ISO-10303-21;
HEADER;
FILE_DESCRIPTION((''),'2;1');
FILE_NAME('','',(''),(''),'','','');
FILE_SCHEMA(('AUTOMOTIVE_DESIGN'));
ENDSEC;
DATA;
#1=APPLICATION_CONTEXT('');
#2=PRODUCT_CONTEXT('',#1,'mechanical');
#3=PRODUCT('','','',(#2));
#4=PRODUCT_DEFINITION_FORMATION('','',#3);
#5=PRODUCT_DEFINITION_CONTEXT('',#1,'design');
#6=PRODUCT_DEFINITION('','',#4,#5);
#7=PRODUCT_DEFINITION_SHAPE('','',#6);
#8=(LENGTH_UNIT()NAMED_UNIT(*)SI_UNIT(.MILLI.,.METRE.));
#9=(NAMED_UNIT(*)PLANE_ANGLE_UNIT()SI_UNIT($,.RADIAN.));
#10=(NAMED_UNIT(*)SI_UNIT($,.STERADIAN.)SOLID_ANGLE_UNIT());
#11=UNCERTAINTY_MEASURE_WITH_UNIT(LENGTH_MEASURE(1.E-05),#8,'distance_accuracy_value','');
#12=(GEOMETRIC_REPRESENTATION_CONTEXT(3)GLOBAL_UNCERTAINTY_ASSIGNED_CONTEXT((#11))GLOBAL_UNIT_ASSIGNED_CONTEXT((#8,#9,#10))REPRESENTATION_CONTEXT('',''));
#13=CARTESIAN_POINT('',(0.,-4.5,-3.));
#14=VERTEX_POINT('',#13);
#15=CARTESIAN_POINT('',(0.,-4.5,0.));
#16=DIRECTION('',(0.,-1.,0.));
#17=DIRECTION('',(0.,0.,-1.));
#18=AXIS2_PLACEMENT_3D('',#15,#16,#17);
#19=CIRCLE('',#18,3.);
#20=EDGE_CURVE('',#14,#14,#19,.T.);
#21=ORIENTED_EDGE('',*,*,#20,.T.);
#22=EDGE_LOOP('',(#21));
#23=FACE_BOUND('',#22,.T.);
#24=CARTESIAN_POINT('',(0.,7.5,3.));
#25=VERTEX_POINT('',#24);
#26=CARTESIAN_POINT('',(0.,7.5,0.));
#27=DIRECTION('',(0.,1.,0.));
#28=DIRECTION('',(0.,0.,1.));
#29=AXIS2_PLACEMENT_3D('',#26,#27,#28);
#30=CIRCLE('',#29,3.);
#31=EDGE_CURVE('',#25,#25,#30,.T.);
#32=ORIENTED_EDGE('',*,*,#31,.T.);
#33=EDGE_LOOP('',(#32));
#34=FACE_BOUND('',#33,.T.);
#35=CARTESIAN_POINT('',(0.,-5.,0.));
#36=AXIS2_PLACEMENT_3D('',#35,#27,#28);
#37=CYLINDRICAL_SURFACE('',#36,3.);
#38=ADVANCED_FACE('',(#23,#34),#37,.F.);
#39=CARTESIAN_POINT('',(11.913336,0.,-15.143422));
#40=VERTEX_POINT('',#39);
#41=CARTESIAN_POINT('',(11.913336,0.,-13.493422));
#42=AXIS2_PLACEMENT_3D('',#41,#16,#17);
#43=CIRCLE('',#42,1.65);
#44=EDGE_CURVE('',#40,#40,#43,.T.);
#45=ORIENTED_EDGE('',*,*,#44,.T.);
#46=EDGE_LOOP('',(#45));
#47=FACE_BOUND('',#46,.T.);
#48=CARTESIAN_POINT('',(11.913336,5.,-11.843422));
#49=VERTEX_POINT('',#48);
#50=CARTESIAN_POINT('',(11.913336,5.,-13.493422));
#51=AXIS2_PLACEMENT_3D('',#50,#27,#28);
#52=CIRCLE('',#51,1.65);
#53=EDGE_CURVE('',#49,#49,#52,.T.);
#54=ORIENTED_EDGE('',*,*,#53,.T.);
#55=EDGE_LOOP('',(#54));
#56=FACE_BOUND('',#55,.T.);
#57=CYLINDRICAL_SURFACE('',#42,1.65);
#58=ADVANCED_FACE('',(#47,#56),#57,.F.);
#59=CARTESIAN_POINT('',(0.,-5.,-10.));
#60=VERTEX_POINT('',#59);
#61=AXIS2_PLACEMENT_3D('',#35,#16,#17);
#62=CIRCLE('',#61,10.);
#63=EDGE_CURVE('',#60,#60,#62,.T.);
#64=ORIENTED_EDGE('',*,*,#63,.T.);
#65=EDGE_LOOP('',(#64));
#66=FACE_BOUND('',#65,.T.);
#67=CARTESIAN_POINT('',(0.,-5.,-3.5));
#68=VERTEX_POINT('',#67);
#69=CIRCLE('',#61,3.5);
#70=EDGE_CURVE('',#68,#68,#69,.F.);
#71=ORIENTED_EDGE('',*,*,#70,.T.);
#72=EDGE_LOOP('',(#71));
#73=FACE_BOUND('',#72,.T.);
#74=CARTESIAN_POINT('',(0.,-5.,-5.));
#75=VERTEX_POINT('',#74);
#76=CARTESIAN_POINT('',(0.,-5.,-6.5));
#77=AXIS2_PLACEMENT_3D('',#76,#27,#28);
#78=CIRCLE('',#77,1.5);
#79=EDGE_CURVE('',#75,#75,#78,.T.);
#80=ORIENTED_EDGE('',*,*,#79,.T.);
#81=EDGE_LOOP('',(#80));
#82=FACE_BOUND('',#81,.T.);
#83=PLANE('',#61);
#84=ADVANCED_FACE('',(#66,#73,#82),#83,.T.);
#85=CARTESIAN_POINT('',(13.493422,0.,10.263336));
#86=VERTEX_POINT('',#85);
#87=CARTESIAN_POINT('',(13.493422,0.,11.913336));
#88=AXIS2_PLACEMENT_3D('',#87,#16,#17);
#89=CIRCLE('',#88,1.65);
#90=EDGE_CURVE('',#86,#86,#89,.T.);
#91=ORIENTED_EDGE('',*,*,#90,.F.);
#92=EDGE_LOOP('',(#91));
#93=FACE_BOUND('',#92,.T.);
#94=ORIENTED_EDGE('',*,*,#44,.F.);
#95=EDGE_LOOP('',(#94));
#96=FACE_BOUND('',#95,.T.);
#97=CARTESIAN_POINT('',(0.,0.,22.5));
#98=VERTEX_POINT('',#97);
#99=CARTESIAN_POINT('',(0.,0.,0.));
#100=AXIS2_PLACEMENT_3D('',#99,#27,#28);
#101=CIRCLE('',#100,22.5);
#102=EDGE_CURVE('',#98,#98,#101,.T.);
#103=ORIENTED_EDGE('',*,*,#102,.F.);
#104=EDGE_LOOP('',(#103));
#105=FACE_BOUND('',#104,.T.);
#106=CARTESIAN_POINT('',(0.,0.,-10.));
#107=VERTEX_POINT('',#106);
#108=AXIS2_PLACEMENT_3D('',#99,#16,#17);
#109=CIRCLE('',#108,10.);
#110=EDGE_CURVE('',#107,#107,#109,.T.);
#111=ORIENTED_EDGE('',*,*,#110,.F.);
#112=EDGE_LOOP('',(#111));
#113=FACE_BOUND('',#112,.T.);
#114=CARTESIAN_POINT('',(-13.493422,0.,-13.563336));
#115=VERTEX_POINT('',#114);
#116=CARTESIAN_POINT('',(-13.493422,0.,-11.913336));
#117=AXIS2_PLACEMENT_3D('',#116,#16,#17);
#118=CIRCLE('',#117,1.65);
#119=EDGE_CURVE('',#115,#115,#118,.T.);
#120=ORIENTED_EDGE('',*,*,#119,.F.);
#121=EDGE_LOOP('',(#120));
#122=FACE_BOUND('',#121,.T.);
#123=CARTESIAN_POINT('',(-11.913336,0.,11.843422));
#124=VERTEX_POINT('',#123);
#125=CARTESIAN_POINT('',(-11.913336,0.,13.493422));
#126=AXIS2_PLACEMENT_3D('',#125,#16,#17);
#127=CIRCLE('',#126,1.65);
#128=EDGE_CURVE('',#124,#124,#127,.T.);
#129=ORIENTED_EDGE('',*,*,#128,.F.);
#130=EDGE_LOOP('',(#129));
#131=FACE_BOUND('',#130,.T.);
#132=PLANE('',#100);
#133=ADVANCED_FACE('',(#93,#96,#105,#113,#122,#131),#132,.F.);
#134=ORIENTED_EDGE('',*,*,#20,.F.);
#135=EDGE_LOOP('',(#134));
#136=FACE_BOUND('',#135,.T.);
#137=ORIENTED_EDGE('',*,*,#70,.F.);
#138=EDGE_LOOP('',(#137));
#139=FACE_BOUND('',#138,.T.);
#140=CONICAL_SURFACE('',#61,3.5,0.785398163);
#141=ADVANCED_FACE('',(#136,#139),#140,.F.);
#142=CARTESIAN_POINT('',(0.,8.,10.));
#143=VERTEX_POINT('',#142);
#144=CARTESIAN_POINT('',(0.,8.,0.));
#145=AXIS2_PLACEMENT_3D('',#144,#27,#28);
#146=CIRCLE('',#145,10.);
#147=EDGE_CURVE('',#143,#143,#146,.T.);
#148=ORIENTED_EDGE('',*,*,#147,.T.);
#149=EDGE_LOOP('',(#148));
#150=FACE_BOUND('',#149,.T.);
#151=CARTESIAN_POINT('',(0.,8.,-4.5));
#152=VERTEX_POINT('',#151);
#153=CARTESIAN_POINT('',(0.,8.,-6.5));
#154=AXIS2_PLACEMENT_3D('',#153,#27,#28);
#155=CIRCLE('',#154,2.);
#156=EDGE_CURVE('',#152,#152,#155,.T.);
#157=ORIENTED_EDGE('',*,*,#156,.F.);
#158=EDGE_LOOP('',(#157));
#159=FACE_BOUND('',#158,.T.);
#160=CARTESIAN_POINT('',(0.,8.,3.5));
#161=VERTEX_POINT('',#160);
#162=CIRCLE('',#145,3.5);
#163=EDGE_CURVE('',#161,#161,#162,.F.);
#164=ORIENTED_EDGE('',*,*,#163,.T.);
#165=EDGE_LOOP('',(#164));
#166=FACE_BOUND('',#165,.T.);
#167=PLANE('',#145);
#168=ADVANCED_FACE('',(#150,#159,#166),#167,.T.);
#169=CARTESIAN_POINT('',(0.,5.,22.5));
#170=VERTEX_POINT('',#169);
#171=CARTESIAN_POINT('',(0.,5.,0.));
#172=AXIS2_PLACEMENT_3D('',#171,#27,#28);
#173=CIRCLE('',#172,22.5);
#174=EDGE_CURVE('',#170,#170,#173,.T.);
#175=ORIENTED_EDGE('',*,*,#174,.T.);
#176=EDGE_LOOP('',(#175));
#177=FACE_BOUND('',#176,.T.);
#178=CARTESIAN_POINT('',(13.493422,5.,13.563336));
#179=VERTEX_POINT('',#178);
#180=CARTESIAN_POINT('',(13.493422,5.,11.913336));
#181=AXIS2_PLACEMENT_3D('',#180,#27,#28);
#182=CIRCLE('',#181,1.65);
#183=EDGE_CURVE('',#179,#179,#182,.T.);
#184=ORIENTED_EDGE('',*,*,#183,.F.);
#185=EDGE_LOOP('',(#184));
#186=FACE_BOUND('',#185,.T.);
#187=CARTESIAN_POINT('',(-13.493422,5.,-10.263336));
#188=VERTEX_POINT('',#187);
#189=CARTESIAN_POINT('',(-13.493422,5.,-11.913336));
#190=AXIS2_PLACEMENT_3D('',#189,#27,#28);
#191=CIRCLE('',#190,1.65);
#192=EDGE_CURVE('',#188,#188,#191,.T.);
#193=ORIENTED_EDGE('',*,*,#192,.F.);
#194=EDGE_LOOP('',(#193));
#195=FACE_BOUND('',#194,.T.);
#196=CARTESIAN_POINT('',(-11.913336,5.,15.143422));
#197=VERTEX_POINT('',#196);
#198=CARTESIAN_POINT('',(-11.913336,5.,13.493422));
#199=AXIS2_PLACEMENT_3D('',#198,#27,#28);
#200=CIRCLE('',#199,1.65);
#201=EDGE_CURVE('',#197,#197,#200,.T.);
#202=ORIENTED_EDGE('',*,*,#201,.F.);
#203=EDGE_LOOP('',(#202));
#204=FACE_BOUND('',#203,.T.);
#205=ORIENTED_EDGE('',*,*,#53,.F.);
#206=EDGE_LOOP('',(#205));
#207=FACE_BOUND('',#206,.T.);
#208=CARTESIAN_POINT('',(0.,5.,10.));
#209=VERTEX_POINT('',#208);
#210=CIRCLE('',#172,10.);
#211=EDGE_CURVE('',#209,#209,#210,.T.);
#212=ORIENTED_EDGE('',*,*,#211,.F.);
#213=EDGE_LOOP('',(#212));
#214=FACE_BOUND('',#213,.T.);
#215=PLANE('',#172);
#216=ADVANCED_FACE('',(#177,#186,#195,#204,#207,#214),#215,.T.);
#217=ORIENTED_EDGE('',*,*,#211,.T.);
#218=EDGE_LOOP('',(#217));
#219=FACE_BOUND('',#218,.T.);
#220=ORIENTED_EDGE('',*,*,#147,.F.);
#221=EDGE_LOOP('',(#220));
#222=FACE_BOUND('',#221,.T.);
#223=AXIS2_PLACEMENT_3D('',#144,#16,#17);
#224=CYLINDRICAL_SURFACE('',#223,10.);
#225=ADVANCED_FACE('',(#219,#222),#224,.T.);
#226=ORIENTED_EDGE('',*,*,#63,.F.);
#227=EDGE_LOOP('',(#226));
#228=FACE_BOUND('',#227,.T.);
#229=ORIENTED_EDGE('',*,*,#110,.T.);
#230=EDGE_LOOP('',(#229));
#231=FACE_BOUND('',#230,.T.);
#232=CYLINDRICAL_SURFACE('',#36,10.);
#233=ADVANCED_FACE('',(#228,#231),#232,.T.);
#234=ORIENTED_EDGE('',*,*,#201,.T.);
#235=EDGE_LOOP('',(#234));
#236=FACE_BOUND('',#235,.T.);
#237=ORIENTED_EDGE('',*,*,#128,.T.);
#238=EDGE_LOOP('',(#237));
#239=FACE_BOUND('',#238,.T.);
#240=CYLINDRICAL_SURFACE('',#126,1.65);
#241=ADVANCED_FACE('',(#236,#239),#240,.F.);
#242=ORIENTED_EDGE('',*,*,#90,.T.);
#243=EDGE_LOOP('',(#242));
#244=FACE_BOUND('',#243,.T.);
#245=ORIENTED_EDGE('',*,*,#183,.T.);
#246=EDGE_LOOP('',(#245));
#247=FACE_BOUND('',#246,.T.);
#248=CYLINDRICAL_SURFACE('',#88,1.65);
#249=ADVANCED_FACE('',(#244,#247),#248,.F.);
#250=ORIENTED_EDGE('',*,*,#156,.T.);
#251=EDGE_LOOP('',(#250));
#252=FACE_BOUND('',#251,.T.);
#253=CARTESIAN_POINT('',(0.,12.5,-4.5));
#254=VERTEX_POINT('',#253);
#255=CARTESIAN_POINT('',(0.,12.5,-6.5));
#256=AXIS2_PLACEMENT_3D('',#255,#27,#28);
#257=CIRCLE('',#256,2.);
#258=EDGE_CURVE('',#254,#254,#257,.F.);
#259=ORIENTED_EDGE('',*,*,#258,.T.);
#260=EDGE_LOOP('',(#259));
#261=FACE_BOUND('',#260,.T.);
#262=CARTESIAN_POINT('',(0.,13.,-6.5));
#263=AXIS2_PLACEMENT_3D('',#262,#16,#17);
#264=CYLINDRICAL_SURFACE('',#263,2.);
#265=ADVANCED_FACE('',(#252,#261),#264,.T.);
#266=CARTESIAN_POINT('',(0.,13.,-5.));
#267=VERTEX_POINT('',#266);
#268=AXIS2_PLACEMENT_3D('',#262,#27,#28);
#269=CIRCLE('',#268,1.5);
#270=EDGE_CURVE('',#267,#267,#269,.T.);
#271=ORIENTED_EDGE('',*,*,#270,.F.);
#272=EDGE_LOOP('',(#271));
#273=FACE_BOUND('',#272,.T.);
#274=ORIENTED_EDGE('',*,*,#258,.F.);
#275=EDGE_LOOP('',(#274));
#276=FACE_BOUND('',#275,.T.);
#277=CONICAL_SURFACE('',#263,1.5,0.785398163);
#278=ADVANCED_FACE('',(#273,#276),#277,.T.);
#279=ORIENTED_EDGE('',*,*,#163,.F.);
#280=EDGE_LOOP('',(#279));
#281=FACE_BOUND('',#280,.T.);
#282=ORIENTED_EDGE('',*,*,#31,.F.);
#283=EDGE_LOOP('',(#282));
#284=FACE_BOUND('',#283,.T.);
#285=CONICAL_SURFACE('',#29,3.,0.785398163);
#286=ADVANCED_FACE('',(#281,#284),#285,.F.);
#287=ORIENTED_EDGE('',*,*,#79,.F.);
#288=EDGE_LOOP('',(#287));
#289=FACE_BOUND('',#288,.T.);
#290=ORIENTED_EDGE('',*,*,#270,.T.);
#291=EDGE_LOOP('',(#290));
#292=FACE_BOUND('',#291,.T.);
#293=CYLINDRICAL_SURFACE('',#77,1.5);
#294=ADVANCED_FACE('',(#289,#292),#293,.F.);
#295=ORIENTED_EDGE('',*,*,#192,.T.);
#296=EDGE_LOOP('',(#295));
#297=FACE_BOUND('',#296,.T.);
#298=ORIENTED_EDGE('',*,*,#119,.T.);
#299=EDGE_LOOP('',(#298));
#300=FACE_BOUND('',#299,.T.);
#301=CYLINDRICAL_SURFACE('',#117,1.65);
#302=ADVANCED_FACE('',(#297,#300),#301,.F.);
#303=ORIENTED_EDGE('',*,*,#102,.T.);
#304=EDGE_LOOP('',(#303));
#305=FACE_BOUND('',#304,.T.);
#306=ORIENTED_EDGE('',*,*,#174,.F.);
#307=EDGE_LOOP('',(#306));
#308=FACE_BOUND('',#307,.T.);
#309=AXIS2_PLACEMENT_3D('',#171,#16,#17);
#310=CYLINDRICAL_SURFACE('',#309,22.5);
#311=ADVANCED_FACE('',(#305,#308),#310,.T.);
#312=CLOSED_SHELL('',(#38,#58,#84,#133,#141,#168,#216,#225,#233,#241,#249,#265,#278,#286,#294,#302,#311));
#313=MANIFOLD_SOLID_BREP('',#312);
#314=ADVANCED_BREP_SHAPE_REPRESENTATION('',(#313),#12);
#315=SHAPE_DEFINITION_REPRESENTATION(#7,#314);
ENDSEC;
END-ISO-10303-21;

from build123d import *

# Parameters (mm, degrees)
SKETCH_1_R               = 22.5
EXTRUDE_1_DEPTH          = 5
SKETCH_2_R               = 10
EXTRUDE_2_DEPTH          = 5
EXTRUDE_START            = 3
SKETCH_4_R               = 10
EXTRUDE_3_DEPTH          = 3
CUT_EXTRUDE_2_DEPTH      = 35.372954485
CUT_EXTRUDE_2_DEPTH_BACK = 35.372954485
SKETCH_5_R               = 3
HOLE_WIZARD_M4_3_D       = 3.3
SKETCH_10_R              = 1.5
CUT_EXTRUDE_3_DEPTH      = 35.372954485
CHAMFER_2_SIZE           = 0.5
EXTRUDE_START_2          = 5
SKETCH_11_R              = 2
SKETCH_11_R_2            = 1.5
EXTRUDE_4_DEPTH          = 5
CHAMFER_3_SIZE           = 0.5


with BuildPart() as part:
    # 草图1 → 凸台-拉伸1 (new body)
    with BuildSketch(Plane(origin=(0, 0, 0), x_dir=(1, 0, 0), z_dir=(0, 1, 0))):
        with Locations(Location((0, 0, 0), (0, 0, 270))):
            Circle(SKETCH_1_R)
    extrude(amount=EXTRUDE_1_DEPTH)

    # 草图2 → 凸台-拉伸2 (add)
    with BuildSketch(Plane.XZ):
        with Locations(Location((0, 0, 0), (0, 0, 270))):
            Circle(SKETCH_2_R)
    extrude(amount=EXTRUDE_2_DEPTH)

    # 草图4 → 凸台-拉伸3 (add)
    with BuildSketch(Plane(origin=(0, 5, 0), x_dir=(1, 0, 0), z_dir=(0, 1, 0)).offset(EXTRUDE_START)):
        with Locations(Location((0, 0, 0), (0, 0, 90))):
            Circle(SKETCH_4_R)
    extrude(amount=-EXTRUDE_3_DEPTH)

    # 草图5 → 切除-拉伸2 (cut, two sides: drawn at the far end of the back side and taken through both)
    with BuildSketch(Plane(origin=(0, 8, 0), x_dir=(1, 0, 0), z_dir=(0, 1, 0)).offset(-CUT_EXTRUDE_2_DEPTH_BACK)):
        with Locations(Location((0, 0, 0), (0, 0, 270))):
            Circle(SKETCH_5_R)
    extrude(amount=CUT_EXTRUDE_2_DEPTH + CUT_EXTRUDE_2_DEPTH_BACK, mode=Mode.SUBTRACT)

    # M4 螺纹孔3 (through all)
    with Locations(Plane.XZ):
        with Locations((11.913336036, -13.493421527), (13.493421527, 11.913336036), (-11.913336036, 13.493421527), (-13.493421527, -11.913336036)):
            Hole(HOLE_WIZARD_M4_3_D / 2)

    # 草图10 → 切除-拉伸3 (cut, through all)
    with BuildSketch(Plane(origin=(0, 8, 0), x_dir=(1, 0, 0), z_dir=(0, 1, 0))):
        with Locations(Location((0, 6.5, 0), (0, 0, 270))):
            Circle(SKETCH_10_R)
    extrude(amount=-CUT_EXTRUDE_3_DEPTH, mode=Mode.SUBTRACT)

    # 倒角2
    chamfer_2_edges = [part.edges().sort_by_distance(p)[0] for p in [
        (0, 8, -3),
        (0, -5, -3),
    ]]
    chamfer(chamfer_2_edges, length=CHAMFER_2_SIZE)

    # 草图11 → 凸台-拉伸4 (add)
    with BuildSketch(Plane(origin=(0, 8, 0), x_dir=(1, 0, 0), z_dir=(0, 1, 0)).offset(EXTRUDE_START_2)):
        with Locations(Location((0, 6.5, 0), (0, 0, 270))):
            Circle(SKETCH_11_R)
        with Locations(Location((0, 6.5, 0), (0, 0, 270))):
            Circle(SKETCH_11_R_2, mode=Mode.SUBTRACT)
    extrude(amount=-EXTRUDE_4_DEPTH)

    # 倒角3
    chamfer_3_edges = [part.edges().sort_by_distance(p)[0] for p in [
        (0, 13, -8.5),
    ]]
    chamfer(chamfer_3_edges, length=CHAMFER_3_SIZE - 0.0001)  # a hair under: the kernel refuses the full size


solid = part.part
